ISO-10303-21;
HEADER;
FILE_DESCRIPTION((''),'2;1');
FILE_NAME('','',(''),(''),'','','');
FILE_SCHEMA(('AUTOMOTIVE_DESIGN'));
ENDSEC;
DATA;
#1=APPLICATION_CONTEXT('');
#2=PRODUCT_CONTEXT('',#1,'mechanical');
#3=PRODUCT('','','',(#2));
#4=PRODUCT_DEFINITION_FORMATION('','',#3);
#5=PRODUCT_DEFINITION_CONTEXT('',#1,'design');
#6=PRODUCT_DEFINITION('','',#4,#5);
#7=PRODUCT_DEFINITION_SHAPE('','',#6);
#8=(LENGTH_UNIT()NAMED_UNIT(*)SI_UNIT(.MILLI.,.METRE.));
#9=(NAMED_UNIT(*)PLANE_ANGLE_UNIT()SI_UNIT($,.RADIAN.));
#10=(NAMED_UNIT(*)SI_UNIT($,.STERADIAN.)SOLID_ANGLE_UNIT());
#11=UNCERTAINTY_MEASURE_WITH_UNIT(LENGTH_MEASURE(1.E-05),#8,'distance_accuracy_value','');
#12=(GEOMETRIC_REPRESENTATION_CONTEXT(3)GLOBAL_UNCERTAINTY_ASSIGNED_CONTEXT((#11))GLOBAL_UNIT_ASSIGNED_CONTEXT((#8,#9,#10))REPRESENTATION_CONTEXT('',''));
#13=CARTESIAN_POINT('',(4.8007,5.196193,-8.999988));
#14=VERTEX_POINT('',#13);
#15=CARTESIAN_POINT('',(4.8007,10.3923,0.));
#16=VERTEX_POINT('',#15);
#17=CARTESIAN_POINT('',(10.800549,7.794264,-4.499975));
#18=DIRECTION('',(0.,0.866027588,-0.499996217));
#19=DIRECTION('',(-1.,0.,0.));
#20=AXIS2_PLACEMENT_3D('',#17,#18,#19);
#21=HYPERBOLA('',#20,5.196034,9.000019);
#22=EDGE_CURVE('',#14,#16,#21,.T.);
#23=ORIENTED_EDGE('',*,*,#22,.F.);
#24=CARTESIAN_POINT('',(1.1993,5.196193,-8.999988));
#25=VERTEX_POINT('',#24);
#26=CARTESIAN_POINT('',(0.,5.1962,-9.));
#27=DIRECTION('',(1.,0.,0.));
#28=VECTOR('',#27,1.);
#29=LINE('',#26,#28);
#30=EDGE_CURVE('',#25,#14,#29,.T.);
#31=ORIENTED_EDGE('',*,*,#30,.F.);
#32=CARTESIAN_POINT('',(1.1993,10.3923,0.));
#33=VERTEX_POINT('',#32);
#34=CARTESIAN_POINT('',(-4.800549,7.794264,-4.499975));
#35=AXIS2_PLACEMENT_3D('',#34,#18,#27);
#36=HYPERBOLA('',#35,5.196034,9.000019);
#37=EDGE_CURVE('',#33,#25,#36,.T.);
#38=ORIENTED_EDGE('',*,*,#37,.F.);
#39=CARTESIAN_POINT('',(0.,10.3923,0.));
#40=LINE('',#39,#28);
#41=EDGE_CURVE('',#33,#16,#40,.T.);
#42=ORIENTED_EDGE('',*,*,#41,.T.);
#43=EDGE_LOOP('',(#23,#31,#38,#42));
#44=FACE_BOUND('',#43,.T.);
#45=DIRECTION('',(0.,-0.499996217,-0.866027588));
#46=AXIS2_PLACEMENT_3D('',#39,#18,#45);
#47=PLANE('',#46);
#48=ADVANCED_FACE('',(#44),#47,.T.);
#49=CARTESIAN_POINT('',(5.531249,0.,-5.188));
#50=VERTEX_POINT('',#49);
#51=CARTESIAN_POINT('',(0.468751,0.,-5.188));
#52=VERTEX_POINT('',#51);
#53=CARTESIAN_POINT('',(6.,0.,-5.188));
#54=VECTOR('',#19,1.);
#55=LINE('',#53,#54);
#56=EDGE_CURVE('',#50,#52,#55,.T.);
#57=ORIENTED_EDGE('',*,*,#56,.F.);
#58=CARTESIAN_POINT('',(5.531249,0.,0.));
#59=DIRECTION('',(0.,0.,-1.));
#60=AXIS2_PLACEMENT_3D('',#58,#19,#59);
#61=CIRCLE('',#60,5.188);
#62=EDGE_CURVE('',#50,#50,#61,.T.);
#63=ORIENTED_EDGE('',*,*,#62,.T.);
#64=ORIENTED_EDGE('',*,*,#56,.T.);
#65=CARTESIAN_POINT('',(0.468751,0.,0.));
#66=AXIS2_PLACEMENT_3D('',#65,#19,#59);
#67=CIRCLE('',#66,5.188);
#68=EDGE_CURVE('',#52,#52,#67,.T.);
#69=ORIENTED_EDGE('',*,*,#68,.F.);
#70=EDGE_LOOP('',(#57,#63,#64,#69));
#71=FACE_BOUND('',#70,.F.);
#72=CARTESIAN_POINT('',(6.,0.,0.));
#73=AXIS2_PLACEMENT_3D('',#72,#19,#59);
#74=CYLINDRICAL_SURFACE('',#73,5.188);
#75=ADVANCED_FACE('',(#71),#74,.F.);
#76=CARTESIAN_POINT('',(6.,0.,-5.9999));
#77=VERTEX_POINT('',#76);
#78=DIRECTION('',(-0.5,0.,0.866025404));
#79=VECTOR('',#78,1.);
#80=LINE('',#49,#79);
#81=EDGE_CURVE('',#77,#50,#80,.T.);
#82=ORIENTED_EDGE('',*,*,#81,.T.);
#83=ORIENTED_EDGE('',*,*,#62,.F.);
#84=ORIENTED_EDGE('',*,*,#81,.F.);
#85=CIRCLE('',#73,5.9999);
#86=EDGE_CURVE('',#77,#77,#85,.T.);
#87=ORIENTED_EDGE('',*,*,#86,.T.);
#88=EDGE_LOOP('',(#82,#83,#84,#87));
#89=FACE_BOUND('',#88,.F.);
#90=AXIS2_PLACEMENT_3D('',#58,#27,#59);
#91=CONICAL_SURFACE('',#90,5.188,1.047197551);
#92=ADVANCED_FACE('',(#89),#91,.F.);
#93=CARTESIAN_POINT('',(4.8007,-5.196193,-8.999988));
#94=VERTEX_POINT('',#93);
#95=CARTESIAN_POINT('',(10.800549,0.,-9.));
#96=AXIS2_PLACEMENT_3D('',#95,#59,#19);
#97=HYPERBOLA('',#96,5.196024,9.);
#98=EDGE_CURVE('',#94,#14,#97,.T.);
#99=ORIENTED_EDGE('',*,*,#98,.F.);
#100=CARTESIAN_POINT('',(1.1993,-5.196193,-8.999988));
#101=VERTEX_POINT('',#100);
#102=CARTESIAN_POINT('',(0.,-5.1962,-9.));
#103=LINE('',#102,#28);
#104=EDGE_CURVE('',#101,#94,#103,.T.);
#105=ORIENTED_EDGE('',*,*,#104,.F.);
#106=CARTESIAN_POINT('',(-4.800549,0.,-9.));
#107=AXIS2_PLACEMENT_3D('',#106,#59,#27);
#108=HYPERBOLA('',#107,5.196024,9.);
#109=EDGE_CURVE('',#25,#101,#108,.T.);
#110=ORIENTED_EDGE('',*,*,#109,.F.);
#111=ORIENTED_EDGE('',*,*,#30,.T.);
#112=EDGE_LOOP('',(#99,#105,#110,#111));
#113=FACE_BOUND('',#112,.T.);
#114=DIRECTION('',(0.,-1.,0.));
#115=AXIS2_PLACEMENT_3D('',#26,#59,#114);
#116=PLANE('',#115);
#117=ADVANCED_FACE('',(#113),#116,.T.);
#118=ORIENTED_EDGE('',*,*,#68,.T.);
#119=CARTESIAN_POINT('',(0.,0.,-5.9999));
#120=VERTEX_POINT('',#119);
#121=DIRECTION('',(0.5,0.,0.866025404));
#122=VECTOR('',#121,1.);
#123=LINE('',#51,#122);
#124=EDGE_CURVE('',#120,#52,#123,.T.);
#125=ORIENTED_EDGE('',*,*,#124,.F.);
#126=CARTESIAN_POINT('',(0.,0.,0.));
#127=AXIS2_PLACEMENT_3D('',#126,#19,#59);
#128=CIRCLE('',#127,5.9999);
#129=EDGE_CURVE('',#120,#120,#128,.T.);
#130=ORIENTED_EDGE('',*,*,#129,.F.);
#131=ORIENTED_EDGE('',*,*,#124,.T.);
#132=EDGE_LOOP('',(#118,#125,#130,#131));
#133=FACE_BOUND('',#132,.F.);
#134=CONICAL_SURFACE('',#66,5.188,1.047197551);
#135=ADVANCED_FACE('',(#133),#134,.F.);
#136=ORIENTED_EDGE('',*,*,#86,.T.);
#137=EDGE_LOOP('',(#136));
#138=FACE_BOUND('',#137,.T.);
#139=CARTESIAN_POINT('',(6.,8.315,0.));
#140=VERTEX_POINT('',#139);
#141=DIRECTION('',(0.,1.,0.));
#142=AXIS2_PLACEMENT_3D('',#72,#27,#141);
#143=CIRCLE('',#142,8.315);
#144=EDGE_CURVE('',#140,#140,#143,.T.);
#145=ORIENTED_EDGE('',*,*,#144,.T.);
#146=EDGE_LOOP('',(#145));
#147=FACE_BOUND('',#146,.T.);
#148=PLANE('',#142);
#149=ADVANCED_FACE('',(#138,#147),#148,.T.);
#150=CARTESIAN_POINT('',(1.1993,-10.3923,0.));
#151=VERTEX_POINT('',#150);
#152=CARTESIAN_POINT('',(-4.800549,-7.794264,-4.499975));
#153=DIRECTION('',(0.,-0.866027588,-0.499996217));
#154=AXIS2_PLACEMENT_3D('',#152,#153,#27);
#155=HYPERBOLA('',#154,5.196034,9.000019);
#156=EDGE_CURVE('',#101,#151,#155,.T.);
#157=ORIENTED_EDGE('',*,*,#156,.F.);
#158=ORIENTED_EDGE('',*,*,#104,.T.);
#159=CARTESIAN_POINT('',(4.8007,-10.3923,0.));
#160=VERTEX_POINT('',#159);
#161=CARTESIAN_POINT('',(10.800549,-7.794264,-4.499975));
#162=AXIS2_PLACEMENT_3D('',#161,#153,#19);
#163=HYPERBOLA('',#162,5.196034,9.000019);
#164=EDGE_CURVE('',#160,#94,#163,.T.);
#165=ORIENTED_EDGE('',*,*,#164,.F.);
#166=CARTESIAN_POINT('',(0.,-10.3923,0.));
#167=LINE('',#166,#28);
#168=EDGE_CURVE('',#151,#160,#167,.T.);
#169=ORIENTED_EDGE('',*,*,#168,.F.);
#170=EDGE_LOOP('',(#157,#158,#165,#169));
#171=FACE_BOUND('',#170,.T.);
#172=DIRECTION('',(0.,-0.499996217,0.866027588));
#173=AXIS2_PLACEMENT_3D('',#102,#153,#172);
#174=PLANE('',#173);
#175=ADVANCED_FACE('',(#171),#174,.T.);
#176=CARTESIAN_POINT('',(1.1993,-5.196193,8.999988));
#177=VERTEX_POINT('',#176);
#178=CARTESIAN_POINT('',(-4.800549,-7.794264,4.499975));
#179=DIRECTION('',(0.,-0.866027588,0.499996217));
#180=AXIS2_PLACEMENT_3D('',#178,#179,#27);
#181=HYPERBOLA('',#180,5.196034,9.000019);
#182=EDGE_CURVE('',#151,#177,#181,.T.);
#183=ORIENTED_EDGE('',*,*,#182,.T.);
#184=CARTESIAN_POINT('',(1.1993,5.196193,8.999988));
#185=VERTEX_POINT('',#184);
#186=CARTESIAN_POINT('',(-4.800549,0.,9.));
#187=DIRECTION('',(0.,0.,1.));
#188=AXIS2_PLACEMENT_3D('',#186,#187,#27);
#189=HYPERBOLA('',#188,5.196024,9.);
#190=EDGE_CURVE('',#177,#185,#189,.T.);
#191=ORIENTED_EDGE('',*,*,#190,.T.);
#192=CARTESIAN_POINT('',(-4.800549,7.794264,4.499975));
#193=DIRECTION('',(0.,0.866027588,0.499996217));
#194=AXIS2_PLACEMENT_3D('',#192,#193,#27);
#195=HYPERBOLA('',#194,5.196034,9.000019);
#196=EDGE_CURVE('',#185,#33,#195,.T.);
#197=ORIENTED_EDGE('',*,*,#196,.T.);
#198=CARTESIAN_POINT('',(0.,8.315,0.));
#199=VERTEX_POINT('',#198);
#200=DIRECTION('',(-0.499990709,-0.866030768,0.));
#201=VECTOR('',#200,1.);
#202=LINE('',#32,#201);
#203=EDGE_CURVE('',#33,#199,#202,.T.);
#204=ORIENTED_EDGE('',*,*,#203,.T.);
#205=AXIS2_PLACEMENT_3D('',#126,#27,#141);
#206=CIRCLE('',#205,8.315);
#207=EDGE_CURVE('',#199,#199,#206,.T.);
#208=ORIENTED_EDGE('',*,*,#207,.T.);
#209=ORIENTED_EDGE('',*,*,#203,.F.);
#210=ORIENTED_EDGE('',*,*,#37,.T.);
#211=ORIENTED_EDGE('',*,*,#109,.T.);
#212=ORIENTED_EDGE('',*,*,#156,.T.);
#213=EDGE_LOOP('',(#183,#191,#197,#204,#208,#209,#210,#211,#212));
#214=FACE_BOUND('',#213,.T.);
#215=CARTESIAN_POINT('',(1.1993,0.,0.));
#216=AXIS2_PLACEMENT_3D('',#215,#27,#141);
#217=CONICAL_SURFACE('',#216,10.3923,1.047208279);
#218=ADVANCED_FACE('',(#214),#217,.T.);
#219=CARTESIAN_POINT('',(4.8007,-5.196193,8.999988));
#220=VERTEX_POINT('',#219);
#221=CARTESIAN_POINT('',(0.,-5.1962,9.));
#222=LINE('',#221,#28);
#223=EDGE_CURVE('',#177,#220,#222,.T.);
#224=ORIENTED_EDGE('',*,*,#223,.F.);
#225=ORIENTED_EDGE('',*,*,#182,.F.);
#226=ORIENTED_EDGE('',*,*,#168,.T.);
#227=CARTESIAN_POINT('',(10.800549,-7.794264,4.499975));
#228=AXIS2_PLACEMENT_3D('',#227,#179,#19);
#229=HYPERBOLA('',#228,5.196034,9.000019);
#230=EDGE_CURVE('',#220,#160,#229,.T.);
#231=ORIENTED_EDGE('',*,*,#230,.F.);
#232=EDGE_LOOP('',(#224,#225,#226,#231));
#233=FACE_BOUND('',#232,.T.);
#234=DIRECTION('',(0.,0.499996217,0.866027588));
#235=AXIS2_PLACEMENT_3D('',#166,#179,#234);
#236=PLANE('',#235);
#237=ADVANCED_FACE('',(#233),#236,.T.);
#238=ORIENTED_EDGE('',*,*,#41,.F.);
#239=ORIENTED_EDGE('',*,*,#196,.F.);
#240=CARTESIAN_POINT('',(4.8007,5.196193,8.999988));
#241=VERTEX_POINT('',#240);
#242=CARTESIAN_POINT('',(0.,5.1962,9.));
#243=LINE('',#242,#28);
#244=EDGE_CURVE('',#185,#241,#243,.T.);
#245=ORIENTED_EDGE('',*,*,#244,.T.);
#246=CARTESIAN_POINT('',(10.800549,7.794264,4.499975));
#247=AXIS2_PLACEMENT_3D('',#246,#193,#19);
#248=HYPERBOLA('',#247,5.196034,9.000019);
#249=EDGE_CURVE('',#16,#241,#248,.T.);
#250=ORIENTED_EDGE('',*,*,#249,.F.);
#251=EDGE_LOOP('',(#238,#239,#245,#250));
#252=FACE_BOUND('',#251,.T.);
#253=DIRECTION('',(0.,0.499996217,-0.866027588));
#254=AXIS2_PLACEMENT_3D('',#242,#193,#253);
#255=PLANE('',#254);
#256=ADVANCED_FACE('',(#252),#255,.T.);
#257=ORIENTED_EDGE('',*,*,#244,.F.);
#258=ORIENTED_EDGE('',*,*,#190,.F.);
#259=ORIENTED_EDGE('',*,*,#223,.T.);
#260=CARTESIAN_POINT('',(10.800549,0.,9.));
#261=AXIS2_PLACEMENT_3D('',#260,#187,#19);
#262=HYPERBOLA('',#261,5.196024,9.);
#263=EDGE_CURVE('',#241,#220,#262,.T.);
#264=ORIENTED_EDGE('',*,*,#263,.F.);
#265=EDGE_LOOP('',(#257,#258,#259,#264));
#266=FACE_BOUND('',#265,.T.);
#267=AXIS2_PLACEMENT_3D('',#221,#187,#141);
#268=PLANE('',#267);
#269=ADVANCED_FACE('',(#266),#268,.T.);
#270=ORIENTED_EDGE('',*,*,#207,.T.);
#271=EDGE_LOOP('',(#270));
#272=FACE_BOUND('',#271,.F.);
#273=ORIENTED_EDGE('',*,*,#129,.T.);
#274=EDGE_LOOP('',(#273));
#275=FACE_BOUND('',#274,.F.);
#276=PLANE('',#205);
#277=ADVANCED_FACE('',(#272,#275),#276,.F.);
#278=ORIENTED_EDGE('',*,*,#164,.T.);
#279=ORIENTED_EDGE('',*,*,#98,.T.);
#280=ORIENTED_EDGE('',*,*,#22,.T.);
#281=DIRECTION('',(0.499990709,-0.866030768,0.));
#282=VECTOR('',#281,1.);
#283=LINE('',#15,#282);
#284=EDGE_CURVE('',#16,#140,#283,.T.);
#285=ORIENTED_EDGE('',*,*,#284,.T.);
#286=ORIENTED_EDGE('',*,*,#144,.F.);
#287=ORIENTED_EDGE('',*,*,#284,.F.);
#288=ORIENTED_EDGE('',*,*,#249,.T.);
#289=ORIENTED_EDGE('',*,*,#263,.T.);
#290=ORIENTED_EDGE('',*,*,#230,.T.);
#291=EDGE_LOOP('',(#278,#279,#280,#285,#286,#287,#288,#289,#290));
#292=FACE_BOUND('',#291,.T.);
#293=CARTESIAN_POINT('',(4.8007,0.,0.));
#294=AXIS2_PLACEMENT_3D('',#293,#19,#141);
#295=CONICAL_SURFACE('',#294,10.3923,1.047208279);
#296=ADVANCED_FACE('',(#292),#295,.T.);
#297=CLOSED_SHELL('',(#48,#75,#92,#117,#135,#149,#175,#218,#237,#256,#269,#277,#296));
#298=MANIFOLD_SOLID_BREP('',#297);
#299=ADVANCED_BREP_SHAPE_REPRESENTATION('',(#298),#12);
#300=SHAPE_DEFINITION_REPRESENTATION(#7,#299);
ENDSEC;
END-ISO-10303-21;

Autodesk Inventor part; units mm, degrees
ref_plane "YZ Plane" through (0, 0, 0) normal (1, 0, 0) x (0, 1, 0)
ref_plane "XZ Plane" through (0, 0, 0) normal (0, 1, 0) x (-1, 0, 0)
sketch "Эскиз1" plane through (0, 0, 0) normal (1, 0, 0) x (0, 1, 0)
  line L0 (-10.3923, 0) -> (-5.1962, 9)
  line L1 (-5.1962, 9) -> (5.1962, 9)
  line L2 (5.1962, 9) -> (10.3923, 0)
  line L3 (10.3923, 0) -> (5.1962, -9)
  line L4 (5.1962, -9) -> (-5.1962, -9)
  line L5 (-5.1962, -9) -> (-10.3923, 0)
  point P0 (0, 0)
  point P1 (0, 0)
  dimension "d0" = 20.7846
extrude "Базовый элемент" add sketch "Эскиз1" along normal blind 6
sketch "Эскиз2" plane through (0, 0, 0) normal (0, 0, 1) x (1, 0, 0)
  line L0 (0, 5.1962) -> (0, 10.3923) projected
  line L1 (0, 10.3923) -> (6, 10.3923) projected
  line L2 (6, 5.1962) -> (6, 10.3923) projected
  line L3 (-1.2, 0) -> (7.2, 0) projected
  line L4 (1.1993, 10.3923) -> (0, 8.315)
  line L5 (4.8007, 10.3923) -> (6, 8.315)
  dimension "d3" = 30
  dimension "d4" = 30
  dimension "d5" = 16.63
  dimension "d6" = 16.63
revolve "Фаска1" cut sketch "Эскиз2" angle 360 about axis through (-10, 0, 0) along (1, 0, 0)
sketch "Эскиз3" plane through (6, 0, 0) normal (1, 0, 0) x (0, 0, -1)
  arc A0 (-0.625, -1.0825) -> (0.625, -1.0825) centre (0, 0) ccw projected
hole "Резьба" at (6, 0, 0) direction (-1, 0, 0) diameter 10.376 end through all thread size "M12x1.5" class "6H" standard "ISO Metric profile"
chamfer "Фаска2" distance 0.8119 angle 30 1 edges at (6, 0, 5.188) measured on face at (6, 7.1795, -0.8718)
chamfer "Фаска3" distance 0.8119 angle 30 1 edges at (0, 0, 5.188) measured on face at (0, 7.1795, -0.8718)
ref_plane "Work Plane1" through (-22.2768, 0, 0) normal (0, -0.8660254, -0.5) x (1, 0, 0)
equation "\"d0\" = 1.1547 * SW"
equation "\"d1\" = KOH"
equation "\"d3\" = ANG1"
equation "\"d4\" = ANG2"
equation "\"d5\" = SW0"
equation "\"d6\" = SW01"
equation "\"d8\" = -0.5 * GD1 + 0.5 * NND"
equation "\"d40\" = -0.5 * GD1 + 0.5 * NND"
equation "\"d10\" = -0.5 * GD1 + 0.5 * NND"
equation "\"d41\" = -0.5 * GD1 + 0.5 * NND"
equation "\"ANG1\" = 30deg"
equation "\"ANG2\" = 30deg"
equation "\"NND\" = 12"
equation "\"KOH\" = 6"
equation "\"SW\" = 18"
equation "\"SW0\" = 16.63"
equation "\"SW01\" = SW0"
equation "\"GUL\" = 0.541266 * PTC"
equation "\"LADI\" = 12.345"
equation "\"TOA\" = 30deg"
equation "\"FAWI\" = 30deg"
equation "\"PTC\" = 1.5"
equation "\"THREADDIA\" = 12"
equation "\"E0\" = 1.155 * SW"
equation "\"GAL\" = 0.541266 * PTC"
equation "\"GD1\" = 10.376202"
properties part number "Копия гайки M12x1.5-6H ГОСТ 5916-70" material "Сталь, мягкая"
